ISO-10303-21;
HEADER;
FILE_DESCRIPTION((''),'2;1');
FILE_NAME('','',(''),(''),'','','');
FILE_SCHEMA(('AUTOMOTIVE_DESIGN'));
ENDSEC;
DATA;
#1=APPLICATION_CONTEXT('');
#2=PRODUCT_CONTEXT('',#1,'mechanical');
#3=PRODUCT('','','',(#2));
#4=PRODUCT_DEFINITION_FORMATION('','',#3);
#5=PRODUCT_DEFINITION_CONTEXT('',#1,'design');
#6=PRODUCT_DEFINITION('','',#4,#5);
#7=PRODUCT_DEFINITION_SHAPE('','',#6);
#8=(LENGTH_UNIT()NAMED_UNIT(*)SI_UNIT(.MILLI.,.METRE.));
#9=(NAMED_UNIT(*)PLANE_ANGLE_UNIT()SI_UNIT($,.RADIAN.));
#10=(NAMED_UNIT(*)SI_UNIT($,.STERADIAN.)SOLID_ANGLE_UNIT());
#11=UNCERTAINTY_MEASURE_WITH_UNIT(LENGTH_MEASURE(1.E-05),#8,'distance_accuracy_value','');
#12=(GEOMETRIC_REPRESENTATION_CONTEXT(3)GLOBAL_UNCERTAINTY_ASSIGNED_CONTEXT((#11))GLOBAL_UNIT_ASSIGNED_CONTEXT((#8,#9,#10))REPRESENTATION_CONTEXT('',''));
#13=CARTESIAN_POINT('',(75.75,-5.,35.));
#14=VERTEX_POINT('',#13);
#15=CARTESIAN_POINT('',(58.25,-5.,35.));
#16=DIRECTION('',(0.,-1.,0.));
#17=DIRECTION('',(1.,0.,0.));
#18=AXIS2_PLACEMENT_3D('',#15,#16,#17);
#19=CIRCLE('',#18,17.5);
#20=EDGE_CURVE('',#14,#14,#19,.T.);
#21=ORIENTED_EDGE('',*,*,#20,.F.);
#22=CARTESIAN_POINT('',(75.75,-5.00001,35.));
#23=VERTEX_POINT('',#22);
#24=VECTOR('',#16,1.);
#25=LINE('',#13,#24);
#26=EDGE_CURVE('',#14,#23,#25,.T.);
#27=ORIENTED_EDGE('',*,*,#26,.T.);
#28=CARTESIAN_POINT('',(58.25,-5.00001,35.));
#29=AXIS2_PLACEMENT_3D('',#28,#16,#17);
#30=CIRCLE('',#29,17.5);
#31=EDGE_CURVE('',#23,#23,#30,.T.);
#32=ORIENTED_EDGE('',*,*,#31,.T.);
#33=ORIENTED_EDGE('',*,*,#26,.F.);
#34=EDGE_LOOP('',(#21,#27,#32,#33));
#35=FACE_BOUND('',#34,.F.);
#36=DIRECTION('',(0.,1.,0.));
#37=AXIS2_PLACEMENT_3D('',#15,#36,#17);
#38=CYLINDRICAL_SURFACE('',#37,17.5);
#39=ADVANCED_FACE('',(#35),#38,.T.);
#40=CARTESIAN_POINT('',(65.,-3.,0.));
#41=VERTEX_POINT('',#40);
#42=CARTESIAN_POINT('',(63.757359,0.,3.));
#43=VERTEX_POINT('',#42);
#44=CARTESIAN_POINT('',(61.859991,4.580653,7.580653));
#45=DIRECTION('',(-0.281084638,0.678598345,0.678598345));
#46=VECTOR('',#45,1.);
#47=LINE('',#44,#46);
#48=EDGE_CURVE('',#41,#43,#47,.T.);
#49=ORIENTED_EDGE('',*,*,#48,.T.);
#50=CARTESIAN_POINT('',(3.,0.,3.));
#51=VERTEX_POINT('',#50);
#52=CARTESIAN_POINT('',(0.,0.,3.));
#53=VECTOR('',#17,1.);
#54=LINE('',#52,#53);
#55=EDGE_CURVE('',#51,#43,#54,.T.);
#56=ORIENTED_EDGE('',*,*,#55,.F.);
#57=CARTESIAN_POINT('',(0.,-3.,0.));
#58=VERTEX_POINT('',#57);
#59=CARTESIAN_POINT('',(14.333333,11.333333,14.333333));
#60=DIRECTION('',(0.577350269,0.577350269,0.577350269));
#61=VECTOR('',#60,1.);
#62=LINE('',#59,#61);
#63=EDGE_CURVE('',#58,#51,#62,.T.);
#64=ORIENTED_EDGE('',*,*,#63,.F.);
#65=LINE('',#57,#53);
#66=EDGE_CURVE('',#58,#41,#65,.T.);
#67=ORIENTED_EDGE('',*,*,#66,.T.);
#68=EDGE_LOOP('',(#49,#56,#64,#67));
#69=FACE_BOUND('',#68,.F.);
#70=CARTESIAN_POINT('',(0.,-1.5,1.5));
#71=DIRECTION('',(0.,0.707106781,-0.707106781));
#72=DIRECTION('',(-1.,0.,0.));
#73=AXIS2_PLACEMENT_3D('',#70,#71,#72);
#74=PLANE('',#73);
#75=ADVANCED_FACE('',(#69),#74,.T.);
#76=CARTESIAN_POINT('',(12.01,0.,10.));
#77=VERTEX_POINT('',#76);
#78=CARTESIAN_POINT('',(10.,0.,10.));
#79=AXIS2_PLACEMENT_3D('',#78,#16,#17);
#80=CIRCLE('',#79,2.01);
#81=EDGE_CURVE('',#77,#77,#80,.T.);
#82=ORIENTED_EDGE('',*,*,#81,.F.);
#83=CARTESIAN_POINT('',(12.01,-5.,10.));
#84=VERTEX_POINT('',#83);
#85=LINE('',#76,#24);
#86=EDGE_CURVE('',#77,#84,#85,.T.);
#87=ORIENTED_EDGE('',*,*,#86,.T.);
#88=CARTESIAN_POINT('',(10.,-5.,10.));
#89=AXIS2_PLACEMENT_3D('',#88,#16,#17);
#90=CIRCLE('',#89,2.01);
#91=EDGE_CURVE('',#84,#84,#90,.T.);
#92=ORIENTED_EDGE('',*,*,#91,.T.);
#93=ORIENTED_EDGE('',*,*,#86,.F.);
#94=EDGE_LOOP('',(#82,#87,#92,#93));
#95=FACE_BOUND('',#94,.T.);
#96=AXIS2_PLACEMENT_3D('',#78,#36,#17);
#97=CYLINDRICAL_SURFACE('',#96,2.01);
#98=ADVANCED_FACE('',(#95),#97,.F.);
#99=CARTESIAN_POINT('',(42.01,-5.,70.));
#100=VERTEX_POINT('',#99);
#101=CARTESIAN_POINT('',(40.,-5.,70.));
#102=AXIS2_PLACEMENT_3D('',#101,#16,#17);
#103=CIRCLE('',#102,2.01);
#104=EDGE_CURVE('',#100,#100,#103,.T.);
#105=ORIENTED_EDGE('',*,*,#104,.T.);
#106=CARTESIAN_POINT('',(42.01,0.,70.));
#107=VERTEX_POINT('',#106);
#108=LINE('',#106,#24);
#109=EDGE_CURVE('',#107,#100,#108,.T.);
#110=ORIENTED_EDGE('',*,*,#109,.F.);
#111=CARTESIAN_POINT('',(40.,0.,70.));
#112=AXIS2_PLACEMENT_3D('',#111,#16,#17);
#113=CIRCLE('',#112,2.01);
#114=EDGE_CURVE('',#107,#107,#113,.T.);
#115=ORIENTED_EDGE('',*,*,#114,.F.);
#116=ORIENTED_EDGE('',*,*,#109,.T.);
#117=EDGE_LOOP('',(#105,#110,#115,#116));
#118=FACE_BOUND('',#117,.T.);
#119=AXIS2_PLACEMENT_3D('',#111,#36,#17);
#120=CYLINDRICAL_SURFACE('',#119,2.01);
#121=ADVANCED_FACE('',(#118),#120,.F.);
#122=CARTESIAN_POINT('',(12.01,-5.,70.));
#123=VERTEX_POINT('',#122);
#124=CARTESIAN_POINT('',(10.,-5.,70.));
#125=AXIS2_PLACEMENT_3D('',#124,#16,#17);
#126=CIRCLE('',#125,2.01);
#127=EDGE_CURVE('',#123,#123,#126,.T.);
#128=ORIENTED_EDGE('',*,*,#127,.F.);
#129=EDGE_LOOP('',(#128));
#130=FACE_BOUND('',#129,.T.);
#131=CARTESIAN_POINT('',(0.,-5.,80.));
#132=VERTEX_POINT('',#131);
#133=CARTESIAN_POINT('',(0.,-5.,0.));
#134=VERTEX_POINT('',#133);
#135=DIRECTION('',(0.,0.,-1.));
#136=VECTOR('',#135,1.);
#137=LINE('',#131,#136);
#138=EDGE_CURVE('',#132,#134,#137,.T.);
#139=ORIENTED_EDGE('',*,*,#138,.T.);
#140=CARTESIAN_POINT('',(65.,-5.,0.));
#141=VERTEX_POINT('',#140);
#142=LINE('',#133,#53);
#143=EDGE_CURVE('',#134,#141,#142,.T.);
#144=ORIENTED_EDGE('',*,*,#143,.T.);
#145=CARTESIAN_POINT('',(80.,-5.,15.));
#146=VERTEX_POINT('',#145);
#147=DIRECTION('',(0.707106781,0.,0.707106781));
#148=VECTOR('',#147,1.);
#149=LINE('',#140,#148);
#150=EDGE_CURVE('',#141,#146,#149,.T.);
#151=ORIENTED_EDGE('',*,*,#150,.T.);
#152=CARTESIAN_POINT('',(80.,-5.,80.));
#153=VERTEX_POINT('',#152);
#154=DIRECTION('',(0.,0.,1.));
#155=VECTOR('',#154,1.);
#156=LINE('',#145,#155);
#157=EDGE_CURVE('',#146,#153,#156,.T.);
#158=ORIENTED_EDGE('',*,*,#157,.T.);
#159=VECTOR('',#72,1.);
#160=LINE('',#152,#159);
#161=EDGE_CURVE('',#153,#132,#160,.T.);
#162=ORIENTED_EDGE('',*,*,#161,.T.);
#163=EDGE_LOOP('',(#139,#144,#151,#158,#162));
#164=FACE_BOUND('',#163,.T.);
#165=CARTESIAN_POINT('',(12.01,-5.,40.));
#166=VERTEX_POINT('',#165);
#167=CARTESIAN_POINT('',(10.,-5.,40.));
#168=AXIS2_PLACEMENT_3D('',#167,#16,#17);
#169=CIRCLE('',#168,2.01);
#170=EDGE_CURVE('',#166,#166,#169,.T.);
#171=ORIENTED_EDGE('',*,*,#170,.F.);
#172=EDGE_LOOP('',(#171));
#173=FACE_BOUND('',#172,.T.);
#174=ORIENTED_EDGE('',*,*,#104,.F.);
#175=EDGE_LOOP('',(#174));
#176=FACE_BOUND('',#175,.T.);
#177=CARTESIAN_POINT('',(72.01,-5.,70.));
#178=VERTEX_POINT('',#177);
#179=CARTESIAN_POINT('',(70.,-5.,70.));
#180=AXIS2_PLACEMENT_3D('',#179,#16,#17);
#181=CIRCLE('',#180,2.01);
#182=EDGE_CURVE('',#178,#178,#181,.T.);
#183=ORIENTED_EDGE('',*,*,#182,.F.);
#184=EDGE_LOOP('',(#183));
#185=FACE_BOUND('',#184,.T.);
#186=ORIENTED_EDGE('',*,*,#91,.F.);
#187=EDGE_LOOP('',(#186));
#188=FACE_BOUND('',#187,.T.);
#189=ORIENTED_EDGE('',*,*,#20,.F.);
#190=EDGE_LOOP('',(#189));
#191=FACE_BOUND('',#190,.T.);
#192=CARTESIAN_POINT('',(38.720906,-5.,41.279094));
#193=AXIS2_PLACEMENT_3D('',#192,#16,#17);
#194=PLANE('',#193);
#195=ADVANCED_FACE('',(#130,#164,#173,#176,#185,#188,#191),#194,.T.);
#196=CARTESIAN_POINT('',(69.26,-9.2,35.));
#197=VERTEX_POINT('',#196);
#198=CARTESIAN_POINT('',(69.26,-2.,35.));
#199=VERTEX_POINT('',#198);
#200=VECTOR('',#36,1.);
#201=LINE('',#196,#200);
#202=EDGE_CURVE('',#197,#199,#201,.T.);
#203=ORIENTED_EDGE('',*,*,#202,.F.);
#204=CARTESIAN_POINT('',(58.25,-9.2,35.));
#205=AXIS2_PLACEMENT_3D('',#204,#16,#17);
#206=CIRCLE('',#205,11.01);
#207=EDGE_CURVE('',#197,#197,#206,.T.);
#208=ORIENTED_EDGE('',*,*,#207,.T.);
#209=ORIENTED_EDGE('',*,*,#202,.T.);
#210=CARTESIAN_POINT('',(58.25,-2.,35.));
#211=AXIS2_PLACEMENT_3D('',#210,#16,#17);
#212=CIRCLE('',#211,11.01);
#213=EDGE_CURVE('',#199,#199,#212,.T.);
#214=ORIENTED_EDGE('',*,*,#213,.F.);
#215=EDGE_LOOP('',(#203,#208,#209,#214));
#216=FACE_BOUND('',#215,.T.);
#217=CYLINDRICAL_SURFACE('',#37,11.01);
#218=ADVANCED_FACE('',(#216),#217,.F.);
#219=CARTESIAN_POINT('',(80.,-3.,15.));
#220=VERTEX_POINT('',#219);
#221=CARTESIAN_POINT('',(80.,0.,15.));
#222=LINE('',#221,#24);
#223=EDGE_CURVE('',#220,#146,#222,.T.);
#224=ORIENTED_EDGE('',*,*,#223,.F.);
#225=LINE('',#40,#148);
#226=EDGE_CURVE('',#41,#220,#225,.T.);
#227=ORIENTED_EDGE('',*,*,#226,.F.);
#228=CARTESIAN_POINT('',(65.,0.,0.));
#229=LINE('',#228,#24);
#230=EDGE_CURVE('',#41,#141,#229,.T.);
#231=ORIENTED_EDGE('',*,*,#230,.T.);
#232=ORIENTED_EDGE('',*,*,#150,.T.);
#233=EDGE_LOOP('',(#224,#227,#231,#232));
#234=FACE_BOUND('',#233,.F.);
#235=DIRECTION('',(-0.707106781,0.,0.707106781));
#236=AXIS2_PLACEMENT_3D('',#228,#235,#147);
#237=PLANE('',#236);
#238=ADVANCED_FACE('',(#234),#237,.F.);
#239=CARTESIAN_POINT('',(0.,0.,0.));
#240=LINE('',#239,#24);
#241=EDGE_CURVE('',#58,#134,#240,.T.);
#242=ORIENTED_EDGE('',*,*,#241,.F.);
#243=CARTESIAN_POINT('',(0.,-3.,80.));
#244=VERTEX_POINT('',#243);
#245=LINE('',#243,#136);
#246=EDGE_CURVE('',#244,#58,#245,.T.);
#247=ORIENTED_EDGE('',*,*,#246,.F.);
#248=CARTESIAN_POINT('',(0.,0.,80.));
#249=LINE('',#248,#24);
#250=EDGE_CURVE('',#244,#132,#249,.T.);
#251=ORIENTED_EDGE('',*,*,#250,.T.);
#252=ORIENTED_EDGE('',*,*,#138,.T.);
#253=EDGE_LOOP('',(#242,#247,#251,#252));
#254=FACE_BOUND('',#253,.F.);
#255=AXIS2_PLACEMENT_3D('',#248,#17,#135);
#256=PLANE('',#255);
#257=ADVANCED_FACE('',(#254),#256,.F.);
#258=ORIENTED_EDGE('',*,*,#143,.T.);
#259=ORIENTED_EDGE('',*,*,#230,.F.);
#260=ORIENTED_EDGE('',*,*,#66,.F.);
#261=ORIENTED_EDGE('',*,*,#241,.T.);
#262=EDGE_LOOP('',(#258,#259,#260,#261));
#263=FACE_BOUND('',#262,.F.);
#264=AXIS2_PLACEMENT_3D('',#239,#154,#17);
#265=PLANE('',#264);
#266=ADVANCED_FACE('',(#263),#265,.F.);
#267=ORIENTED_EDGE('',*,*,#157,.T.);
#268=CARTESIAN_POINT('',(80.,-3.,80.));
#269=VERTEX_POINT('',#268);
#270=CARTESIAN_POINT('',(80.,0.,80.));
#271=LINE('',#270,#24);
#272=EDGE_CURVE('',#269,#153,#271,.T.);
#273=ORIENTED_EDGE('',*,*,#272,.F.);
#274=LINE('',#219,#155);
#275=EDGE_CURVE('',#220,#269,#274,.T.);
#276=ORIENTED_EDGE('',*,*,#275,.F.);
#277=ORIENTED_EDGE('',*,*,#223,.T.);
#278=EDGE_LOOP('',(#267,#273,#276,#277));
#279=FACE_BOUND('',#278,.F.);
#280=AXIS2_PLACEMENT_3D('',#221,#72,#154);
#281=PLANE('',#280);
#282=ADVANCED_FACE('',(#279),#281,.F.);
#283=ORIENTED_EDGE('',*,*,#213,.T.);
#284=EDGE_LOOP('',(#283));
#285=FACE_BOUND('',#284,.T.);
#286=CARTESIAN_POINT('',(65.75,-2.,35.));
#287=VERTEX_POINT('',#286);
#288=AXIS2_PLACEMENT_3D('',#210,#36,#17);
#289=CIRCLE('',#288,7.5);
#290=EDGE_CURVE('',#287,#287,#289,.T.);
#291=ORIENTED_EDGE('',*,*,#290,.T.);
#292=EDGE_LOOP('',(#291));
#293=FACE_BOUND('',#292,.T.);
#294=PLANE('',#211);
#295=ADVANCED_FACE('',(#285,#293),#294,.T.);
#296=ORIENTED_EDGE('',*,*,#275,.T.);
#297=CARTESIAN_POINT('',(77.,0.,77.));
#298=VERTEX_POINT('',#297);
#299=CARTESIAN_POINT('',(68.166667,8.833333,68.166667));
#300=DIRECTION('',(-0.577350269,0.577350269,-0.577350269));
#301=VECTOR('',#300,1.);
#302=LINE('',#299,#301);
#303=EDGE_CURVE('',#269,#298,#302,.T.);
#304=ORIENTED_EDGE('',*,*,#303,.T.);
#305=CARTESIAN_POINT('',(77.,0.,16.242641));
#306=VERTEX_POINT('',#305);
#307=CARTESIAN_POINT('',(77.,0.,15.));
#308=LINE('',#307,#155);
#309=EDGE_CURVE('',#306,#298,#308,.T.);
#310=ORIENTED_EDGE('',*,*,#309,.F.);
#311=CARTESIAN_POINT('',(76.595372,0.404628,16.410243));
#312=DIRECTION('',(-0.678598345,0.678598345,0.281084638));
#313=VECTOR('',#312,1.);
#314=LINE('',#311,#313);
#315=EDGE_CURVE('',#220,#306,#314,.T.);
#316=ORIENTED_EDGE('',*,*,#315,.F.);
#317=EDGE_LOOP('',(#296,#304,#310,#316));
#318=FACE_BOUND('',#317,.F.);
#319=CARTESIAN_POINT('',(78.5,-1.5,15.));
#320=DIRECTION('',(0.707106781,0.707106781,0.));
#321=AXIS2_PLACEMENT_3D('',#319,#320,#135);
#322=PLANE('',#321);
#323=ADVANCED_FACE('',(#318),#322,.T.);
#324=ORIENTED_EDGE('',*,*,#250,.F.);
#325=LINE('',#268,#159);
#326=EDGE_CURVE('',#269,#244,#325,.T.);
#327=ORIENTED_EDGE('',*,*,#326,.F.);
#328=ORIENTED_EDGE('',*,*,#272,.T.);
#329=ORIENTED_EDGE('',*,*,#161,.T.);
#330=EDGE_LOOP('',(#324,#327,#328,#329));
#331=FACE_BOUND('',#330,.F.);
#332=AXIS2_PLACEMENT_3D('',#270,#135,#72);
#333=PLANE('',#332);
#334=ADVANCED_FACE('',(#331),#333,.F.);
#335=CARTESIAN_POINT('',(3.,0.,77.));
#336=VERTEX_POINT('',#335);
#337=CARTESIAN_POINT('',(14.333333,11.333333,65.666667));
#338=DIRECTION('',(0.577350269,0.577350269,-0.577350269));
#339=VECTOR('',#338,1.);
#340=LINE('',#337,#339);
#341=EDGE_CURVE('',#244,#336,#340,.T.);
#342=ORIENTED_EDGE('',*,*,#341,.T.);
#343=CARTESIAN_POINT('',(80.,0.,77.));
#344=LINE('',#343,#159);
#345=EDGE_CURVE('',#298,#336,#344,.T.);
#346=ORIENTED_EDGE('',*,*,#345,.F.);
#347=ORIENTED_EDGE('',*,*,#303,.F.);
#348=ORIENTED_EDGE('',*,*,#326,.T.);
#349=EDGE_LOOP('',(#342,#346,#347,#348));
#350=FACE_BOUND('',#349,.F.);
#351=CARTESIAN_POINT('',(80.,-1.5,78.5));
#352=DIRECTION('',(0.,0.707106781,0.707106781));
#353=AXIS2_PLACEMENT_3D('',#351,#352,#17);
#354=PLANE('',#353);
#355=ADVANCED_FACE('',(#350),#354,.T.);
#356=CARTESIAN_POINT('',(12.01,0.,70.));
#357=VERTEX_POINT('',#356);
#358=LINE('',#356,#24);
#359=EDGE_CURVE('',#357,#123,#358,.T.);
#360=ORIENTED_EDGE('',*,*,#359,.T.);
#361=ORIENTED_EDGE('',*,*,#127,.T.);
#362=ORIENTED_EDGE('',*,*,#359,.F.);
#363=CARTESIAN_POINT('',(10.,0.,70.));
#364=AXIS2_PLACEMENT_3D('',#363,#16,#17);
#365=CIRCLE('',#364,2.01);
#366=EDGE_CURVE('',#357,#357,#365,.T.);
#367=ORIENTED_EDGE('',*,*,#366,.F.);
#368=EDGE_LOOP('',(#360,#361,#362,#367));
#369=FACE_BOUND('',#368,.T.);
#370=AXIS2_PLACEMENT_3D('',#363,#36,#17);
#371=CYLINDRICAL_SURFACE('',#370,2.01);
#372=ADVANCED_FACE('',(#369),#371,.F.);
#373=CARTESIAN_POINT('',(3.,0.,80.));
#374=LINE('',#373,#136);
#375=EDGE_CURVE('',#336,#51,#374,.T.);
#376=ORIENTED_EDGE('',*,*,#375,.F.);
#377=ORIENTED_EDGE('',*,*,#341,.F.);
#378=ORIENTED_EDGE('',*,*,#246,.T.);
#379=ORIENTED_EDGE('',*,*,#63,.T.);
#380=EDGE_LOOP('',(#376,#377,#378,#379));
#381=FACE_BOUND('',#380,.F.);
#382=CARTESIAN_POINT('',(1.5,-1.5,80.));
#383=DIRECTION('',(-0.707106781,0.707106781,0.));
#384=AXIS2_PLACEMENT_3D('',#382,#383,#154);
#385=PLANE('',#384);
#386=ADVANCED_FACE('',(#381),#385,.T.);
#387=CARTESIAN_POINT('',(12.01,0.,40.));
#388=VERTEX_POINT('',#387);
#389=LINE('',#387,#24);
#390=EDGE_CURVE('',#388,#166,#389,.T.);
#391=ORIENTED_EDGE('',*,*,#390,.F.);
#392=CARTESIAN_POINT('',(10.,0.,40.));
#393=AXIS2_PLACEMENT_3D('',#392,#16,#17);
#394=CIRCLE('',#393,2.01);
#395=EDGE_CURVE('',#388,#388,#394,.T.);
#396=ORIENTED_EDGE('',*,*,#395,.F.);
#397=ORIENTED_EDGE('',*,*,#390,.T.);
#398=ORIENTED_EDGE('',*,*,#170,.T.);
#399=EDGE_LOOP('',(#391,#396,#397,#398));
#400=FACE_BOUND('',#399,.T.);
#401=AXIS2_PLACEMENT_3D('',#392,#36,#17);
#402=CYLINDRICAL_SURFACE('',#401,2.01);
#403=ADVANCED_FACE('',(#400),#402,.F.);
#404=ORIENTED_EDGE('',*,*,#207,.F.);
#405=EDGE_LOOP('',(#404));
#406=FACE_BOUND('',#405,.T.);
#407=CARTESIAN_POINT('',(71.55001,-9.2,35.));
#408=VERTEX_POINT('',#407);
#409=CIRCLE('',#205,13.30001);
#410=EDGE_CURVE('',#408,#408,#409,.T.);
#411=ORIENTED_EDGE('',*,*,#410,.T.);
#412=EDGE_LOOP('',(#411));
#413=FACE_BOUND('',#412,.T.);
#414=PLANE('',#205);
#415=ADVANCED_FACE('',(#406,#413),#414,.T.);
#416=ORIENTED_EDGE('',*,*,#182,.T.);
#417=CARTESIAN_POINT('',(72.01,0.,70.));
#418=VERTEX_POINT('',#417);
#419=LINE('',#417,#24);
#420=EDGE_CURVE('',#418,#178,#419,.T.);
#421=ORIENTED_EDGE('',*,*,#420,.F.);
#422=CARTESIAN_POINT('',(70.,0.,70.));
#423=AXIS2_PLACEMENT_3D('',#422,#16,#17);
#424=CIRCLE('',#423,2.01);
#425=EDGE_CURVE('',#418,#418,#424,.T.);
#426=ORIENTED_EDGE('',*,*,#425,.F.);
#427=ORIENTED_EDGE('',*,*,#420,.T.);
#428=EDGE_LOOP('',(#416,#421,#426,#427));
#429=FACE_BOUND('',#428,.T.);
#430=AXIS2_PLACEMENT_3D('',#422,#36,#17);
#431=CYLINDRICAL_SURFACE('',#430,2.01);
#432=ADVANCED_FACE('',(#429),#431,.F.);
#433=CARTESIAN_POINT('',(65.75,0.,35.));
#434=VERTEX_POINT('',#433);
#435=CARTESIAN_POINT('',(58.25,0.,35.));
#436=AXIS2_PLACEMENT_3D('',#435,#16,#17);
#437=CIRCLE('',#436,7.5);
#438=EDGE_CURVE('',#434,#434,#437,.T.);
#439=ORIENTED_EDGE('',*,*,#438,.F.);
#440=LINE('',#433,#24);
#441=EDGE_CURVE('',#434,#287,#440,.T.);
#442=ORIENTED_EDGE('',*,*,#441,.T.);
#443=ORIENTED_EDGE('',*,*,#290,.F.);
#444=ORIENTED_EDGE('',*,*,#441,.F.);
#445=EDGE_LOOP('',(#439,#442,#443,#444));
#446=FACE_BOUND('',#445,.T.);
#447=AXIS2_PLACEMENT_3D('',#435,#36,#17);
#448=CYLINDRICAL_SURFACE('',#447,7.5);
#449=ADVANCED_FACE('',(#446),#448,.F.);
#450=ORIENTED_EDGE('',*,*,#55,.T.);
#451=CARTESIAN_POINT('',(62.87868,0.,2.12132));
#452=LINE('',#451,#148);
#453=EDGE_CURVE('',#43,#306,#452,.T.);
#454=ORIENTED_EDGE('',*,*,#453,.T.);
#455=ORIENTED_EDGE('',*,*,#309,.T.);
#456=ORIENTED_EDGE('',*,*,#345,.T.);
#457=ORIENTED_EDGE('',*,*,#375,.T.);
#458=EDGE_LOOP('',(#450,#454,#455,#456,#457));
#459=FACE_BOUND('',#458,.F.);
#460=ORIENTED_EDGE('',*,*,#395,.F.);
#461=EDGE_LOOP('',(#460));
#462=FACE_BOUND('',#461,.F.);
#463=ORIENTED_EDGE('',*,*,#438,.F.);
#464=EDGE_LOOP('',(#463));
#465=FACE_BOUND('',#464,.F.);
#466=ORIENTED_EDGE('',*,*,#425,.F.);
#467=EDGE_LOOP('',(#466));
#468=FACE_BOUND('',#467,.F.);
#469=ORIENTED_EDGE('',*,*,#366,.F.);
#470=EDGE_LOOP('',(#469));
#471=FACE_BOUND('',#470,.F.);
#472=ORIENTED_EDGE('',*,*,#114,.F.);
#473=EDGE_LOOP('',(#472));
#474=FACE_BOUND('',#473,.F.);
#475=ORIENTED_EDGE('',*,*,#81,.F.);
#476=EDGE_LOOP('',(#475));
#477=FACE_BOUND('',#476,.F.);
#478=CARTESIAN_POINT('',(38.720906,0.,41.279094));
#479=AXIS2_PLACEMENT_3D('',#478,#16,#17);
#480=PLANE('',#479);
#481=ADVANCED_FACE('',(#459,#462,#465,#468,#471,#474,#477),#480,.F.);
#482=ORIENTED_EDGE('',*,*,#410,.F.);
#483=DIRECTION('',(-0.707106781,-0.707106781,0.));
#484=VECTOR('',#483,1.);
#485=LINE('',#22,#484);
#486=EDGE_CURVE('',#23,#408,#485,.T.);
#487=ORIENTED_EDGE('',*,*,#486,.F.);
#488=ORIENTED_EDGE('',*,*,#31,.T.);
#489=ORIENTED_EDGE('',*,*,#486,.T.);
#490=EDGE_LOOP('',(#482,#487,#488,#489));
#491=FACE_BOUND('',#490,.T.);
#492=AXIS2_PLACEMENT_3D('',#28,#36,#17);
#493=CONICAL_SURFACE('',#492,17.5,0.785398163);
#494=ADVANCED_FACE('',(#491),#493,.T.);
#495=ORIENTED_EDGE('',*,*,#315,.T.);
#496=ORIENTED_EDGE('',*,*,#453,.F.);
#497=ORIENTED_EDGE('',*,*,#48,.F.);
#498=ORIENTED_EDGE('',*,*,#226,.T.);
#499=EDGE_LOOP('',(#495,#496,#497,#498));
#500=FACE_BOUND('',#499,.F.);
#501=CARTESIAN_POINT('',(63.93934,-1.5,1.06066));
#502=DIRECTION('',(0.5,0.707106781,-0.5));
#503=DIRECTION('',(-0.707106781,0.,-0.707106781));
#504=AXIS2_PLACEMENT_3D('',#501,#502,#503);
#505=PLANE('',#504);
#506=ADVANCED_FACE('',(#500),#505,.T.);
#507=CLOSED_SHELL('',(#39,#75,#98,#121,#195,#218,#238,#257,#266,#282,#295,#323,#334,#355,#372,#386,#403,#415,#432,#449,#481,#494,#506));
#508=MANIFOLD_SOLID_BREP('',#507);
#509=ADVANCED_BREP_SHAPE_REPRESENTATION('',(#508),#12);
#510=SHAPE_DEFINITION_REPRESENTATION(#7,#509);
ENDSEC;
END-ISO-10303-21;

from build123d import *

# Parameters (mm, degrees)
F0_R     = 2.01
F0_R_2   = 7.5
F1_DEPTH = 5
F2_R     = 11.01
F3_DEPTH = 3
F4_R     = 17.5
F4_R_2   = 11.01
F5_DEPTH = 4.2
F6_SIZE  = 4.19999
F7_SIZE  = 3


# Not quite as in the source:
# - a fillet or chamfer is up to 0.001 mm smaller than in the source, because OpenCascade refuses the exact size


with BuildPart() as f1:
    # F0 (on Front) → F1 (new body)
    with BuildSketch(Plane.XZ):
        Polygon((0, 80), (0, 0), (65, 0), (80, 15), (80, 80), align=None)
        with Locations((10, 10)):
            Circle(F0_R, mode=Mode.SUBTRACT)
        with Locations((58.25, 35)):
            Circle(F0_R_2, mode=Mode.SUBTRACT)
        with Locations((10, 40)):
            Circle(F0_R, mode=Mode.SUBTRACT)
        with Locations((10, 70)):
            Circle(F0_R, mode=Mode.SUBTRACT)
        with Locations((40, 70)):
            Circle(F0_R, mode=Mode.SUBTRACT)
        with Locations((70, 70)):
            Circle(F0_R, mode=Mode.SUBTRACT)
    extrude(amount=F1_DEPTH)

    # F2 (on face) → F3 (cut)
    with BuildSketch(Plane.XZ.offset(5)):
        with Locations((58.25, 35)):
            Circle(F2_R)
    extrude(amount=-F3_DEPTH, mode=Mode.SUBTRACT)

    # F4 (on face) → F5 (join)
    with BuildSketch(Plane.XZ.offset(5)):
        with Locations((58.25, 35)):
            Circle(F4_R)
        with Locations((58.25, 35)):
            Circle(F4_R_2, mode=Mode.SUBTRACT)
    extrude(amount=F5_DEPTH)

    # F6 (size 4.2 in the source; OpenCascade refuses exactly that, so slightly less here)
    f6_edges = [f1.edges().sort_by_distance(p)[0] for p in [
        (40.75, -9.2, 35),
    ]]
    chamfer(f6_edges, length=F6_SIZE)

    # F7
    f7_edges = [f1.edges().sort_by_distance(p)[0] for p in [
        (40, 0, 80),
        (80, 0, 47.5),
        (72.5, 0, 7.5),
        (0, 0, 40),
        (32.5, 0, 0),
    ]]
    chamfer(f7_edges, length=F7_SIZE)


with BuildPart() as f8_1:
    # F8: copy of F1
    add(f1.part)


solid = f1.part
